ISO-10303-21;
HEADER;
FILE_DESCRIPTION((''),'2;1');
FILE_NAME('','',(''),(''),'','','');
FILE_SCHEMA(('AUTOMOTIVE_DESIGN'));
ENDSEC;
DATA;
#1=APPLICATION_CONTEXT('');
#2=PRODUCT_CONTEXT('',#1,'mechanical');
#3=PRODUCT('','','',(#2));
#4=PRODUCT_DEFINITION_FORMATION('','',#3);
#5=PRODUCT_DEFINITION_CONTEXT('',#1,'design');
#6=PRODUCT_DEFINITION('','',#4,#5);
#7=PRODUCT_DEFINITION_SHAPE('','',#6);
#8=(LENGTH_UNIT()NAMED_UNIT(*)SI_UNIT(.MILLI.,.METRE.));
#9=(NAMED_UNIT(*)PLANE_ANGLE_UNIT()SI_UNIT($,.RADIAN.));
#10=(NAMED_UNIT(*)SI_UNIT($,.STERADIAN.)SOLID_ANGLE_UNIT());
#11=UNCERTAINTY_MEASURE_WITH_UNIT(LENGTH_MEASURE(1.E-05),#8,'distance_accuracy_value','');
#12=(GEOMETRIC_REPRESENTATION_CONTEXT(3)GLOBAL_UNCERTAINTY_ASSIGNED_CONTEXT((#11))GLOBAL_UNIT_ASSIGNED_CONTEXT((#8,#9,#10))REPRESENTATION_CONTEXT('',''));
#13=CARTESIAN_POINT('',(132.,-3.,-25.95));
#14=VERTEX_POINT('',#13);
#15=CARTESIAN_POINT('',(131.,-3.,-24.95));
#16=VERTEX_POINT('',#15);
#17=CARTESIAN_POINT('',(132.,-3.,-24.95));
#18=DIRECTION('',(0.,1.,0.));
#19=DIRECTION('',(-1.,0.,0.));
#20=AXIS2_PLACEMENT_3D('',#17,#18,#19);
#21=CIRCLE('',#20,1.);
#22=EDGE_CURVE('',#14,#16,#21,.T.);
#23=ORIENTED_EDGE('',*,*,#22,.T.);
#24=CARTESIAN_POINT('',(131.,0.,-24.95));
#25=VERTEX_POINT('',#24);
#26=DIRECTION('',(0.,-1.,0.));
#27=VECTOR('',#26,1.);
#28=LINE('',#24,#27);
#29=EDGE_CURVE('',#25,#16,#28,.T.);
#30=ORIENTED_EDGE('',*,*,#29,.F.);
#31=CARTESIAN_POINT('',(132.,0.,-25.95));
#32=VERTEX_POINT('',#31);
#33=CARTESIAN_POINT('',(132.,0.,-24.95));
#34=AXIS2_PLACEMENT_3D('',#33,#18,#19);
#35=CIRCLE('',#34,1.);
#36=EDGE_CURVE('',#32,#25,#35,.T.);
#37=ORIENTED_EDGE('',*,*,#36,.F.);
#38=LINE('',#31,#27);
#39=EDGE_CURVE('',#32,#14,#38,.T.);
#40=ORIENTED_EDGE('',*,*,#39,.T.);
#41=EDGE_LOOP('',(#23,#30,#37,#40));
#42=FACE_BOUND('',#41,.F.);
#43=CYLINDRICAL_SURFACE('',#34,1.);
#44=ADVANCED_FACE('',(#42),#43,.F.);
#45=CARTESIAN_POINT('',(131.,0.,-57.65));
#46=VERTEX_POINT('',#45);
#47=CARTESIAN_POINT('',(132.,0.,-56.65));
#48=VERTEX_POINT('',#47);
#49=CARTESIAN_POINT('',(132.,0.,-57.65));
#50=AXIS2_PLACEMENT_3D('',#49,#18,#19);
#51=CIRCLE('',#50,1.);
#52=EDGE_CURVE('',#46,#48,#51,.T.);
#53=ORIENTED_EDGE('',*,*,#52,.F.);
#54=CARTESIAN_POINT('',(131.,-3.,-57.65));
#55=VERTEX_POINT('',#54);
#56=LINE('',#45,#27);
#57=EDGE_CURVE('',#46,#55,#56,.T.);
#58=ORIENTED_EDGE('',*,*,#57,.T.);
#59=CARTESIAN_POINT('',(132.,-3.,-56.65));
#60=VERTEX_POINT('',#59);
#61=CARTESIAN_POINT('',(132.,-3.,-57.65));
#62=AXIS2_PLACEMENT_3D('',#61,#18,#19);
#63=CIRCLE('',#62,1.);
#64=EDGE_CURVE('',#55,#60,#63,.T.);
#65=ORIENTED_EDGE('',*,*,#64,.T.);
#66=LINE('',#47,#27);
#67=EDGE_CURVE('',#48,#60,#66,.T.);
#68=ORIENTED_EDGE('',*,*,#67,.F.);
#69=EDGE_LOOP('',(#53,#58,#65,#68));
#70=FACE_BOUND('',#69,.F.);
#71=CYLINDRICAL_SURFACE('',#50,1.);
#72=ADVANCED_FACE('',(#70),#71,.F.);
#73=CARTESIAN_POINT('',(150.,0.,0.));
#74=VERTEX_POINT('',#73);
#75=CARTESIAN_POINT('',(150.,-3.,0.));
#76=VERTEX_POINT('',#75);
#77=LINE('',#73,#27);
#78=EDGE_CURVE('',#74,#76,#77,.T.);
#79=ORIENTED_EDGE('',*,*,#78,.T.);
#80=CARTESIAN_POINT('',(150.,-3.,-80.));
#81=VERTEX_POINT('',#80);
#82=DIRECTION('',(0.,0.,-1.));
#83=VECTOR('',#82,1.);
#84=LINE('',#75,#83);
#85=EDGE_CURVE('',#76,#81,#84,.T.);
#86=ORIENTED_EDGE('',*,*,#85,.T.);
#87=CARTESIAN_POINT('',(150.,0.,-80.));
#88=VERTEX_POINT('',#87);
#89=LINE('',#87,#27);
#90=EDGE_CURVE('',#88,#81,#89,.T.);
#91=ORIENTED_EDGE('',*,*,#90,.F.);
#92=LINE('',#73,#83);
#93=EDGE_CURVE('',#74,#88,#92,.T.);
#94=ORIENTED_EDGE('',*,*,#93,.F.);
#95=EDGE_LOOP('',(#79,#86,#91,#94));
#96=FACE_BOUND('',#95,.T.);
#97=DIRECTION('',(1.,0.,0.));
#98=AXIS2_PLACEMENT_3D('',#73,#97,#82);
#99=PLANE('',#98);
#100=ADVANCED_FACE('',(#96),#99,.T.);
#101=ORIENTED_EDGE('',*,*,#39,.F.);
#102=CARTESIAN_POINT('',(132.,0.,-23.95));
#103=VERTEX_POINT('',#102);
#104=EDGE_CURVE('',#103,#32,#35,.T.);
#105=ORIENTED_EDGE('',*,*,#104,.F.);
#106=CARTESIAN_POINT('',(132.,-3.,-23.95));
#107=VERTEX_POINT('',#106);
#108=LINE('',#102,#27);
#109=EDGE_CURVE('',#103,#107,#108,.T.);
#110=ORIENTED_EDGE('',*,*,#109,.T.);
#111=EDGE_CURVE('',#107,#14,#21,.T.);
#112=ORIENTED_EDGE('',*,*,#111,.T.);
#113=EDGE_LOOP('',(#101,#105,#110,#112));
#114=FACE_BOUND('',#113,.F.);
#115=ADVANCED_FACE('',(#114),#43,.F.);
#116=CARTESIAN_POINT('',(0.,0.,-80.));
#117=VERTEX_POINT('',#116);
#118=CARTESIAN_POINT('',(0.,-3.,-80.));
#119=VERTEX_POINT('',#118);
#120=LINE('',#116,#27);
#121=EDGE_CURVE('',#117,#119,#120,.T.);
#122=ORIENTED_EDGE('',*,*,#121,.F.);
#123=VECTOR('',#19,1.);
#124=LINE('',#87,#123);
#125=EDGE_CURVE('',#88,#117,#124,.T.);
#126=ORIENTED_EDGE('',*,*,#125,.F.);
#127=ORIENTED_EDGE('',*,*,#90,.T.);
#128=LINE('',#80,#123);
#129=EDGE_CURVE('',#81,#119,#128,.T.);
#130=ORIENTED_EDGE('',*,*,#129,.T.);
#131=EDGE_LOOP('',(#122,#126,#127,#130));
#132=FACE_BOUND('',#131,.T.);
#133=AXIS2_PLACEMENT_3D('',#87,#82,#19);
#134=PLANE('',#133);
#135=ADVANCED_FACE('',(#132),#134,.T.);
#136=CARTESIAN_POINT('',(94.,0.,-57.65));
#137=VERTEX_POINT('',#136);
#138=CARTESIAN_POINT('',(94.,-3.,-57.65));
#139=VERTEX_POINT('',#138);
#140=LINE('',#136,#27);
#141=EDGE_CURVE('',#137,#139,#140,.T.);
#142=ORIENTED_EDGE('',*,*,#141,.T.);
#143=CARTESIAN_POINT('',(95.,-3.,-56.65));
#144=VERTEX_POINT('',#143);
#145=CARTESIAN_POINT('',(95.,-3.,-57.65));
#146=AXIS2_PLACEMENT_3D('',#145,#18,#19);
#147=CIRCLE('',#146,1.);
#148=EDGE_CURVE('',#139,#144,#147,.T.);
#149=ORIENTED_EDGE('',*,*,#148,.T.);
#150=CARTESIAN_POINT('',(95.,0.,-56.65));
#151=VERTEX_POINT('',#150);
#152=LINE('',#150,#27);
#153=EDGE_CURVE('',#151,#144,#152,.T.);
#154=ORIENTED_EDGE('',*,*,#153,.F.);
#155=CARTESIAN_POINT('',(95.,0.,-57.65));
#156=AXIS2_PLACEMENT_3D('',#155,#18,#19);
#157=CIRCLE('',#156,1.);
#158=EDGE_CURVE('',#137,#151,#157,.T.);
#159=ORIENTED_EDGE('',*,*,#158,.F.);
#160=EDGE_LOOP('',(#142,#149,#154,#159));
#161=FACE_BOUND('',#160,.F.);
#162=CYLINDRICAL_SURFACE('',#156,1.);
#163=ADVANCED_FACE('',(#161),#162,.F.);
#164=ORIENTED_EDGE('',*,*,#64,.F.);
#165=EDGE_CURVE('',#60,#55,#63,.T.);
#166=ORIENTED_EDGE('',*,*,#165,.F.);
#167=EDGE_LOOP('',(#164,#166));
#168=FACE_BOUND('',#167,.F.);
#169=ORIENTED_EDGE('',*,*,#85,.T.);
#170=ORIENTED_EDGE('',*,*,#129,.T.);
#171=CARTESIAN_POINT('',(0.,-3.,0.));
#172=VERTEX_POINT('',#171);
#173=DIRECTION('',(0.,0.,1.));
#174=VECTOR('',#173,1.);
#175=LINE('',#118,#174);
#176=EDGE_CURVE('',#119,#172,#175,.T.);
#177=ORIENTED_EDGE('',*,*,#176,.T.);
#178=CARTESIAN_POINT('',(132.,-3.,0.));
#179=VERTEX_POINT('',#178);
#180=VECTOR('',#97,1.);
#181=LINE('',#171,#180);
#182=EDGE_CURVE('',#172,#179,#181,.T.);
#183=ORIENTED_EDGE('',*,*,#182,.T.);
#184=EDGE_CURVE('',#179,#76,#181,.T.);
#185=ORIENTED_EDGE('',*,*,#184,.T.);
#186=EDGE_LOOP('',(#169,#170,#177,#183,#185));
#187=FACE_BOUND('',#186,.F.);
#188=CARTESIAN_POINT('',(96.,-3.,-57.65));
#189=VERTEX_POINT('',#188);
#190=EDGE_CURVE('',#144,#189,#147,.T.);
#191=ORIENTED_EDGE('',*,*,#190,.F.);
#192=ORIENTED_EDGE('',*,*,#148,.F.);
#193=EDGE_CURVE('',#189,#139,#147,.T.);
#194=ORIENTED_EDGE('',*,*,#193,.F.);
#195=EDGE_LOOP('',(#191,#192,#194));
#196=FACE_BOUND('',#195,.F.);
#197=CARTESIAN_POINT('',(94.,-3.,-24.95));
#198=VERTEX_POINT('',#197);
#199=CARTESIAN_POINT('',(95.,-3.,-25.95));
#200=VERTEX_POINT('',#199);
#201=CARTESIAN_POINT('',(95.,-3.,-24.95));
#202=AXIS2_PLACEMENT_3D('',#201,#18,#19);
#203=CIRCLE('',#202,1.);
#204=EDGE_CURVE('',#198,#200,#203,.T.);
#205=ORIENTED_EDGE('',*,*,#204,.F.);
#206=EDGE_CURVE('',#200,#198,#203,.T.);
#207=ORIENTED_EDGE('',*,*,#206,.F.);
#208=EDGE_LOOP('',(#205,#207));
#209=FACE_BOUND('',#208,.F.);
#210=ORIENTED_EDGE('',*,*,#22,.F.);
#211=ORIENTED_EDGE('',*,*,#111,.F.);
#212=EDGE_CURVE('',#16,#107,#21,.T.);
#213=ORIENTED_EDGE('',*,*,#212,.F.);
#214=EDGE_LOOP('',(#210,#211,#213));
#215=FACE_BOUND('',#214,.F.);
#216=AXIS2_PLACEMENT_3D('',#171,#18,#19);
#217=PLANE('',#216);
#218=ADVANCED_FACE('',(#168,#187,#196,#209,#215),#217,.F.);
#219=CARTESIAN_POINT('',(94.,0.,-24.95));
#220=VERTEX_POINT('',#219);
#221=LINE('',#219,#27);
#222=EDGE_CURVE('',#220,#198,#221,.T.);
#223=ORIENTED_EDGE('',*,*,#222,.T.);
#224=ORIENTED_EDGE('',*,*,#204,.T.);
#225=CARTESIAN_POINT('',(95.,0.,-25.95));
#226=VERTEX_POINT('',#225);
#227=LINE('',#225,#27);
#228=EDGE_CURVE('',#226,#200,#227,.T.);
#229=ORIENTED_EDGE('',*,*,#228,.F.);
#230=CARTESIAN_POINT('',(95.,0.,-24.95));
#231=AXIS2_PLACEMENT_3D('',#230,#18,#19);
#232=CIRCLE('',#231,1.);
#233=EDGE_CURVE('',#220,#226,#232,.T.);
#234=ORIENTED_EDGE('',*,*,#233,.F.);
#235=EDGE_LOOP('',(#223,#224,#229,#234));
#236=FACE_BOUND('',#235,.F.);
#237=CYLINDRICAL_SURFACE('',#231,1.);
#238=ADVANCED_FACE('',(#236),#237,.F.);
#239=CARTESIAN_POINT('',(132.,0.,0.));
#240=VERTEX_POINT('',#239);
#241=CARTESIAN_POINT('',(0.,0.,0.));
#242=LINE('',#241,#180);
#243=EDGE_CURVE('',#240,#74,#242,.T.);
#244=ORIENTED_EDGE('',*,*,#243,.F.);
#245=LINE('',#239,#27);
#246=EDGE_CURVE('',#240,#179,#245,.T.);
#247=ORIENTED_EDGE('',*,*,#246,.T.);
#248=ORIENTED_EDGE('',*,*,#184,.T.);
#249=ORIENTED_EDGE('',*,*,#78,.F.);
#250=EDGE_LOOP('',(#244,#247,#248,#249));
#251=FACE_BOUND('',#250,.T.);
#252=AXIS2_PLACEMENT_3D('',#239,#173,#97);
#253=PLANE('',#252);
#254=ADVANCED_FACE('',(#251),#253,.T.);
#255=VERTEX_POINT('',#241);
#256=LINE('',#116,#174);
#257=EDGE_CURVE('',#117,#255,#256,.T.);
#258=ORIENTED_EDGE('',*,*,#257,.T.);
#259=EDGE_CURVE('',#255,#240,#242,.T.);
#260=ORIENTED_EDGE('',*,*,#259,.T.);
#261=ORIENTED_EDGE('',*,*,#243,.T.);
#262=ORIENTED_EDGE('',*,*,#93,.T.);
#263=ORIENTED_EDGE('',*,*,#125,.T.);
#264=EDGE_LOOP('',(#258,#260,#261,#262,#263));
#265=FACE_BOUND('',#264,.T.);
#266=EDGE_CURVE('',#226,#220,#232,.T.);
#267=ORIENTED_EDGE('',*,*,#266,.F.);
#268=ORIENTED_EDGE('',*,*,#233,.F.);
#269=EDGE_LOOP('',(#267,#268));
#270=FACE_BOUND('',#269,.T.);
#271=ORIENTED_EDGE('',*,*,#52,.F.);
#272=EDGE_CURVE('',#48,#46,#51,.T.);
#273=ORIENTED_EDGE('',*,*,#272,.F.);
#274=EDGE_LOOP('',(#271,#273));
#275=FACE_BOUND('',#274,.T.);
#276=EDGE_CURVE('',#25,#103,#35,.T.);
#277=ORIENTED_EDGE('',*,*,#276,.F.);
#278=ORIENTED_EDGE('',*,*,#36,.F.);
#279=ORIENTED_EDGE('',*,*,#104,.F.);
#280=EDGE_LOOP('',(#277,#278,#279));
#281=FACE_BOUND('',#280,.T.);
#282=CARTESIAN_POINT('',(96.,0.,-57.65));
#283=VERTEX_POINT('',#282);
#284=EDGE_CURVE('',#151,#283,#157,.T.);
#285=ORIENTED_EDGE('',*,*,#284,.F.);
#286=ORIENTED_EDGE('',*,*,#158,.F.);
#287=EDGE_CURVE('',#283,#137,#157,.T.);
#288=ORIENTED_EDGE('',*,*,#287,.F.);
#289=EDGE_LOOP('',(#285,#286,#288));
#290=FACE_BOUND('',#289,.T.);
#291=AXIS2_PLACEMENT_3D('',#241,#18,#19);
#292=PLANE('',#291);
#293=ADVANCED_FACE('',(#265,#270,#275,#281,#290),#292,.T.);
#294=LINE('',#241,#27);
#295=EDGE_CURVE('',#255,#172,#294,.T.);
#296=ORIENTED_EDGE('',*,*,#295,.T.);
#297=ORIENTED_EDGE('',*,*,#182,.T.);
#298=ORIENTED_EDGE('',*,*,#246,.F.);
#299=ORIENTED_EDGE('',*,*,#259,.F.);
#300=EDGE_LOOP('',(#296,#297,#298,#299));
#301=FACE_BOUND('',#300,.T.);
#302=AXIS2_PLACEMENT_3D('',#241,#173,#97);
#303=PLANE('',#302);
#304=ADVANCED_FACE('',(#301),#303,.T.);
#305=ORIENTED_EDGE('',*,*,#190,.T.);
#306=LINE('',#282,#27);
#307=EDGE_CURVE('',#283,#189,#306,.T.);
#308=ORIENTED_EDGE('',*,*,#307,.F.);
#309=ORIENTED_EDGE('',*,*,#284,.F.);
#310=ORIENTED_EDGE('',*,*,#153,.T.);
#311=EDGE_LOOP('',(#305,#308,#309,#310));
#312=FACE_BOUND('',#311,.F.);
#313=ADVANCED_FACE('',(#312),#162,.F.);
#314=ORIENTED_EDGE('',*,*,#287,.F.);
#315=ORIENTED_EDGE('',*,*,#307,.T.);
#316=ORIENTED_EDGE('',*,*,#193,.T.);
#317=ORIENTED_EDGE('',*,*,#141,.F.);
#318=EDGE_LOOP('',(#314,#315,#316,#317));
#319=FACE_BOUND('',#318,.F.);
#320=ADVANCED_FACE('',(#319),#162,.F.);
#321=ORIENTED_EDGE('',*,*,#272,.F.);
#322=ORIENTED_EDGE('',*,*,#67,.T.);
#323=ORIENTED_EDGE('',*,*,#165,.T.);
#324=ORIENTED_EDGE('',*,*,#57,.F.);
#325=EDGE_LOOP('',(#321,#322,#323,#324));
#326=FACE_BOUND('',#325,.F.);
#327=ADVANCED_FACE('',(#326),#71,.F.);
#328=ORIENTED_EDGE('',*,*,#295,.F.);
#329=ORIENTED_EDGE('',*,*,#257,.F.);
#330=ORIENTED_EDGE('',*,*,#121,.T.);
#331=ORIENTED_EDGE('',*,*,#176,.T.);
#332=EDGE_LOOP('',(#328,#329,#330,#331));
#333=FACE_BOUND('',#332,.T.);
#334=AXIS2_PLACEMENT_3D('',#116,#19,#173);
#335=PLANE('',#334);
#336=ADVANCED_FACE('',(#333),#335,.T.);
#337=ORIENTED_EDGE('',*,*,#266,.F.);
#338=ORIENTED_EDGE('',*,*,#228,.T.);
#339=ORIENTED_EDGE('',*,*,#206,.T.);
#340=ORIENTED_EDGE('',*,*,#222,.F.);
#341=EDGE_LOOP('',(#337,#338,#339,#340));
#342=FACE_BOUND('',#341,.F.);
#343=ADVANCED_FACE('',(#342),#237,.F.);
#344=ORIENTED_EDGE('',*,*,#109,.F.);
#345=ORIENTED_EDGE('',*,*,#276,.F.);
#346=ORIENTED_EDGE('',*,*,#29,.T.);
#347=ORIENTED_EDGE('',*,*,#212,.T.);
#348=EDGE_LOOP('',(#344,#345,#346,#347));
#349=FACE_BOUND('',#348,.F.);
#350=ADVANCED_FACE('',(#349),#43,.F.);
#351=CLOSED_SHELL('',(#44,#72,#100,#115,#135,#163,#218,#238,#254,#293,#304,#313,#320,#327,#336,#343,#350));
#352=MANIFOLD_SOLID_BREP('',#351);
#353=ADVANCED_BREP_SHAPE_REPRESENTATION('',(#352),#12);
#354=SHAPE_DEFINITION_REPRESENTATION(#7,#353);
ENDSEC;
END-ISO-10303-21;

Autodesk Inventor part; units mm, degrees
ref_plane "YZ Plane" through (0, 0, 0) normal (1, 0, 0) x (0, 1, 0)
ref_plane "XZ Plane" through (0, 0, 0) normal (0, 1, 0) x (-1, 0, 0)
ref_plane "XY Plane" through (0, 0, 0) normal (0, 0, 1) x (1, 0, 0)
sketch "草图1" plane through (0, 0, 0) normal (0, 1, 0) x (-1, 0, 0)
  line L0 (0, 0) -> (-150, 0)
  line L1 (-150, 0) -> (-150, -80)
  line L2 (-150, -80) -> (0, -80)
  line L3 (0, -80) -> (0, 0)
  line L4 (-150, 0) -> (-132, 0)
  line L5 (-132, 0) -> (-132, -24.95)
  circle A0 centre (-132, -24.95) radius 1
  line L6 (-132, -24.95) -> (-132, -57.65)
  line L7 (-132, -57.65) -> (-95, -57.65)
  line L8 (-95, -57.65) -> (-95, -24.95)
  circle A1 centre (-95, -24.95) radius 1
  circle A2 centre (-95, -57.65) radius 1
  circle A3 centre (-132, -57.65) radius 1
  dimension "d0" = 150
  dimension "d1" = 80
  dimension "d2" = 18
  dimension "d3" = 24.95
  dimension "d4" = 2
  dimension "d5" = 32.7
  dimension "d6" = 37
  dimension "d7" = 32.7
  dimension "d8" = 2
  dimension "d9" = 2
  dimension "d10" = 2
extrude "拉伸1" add sketch "草图1" against normal blind 3
properties part number "base"
